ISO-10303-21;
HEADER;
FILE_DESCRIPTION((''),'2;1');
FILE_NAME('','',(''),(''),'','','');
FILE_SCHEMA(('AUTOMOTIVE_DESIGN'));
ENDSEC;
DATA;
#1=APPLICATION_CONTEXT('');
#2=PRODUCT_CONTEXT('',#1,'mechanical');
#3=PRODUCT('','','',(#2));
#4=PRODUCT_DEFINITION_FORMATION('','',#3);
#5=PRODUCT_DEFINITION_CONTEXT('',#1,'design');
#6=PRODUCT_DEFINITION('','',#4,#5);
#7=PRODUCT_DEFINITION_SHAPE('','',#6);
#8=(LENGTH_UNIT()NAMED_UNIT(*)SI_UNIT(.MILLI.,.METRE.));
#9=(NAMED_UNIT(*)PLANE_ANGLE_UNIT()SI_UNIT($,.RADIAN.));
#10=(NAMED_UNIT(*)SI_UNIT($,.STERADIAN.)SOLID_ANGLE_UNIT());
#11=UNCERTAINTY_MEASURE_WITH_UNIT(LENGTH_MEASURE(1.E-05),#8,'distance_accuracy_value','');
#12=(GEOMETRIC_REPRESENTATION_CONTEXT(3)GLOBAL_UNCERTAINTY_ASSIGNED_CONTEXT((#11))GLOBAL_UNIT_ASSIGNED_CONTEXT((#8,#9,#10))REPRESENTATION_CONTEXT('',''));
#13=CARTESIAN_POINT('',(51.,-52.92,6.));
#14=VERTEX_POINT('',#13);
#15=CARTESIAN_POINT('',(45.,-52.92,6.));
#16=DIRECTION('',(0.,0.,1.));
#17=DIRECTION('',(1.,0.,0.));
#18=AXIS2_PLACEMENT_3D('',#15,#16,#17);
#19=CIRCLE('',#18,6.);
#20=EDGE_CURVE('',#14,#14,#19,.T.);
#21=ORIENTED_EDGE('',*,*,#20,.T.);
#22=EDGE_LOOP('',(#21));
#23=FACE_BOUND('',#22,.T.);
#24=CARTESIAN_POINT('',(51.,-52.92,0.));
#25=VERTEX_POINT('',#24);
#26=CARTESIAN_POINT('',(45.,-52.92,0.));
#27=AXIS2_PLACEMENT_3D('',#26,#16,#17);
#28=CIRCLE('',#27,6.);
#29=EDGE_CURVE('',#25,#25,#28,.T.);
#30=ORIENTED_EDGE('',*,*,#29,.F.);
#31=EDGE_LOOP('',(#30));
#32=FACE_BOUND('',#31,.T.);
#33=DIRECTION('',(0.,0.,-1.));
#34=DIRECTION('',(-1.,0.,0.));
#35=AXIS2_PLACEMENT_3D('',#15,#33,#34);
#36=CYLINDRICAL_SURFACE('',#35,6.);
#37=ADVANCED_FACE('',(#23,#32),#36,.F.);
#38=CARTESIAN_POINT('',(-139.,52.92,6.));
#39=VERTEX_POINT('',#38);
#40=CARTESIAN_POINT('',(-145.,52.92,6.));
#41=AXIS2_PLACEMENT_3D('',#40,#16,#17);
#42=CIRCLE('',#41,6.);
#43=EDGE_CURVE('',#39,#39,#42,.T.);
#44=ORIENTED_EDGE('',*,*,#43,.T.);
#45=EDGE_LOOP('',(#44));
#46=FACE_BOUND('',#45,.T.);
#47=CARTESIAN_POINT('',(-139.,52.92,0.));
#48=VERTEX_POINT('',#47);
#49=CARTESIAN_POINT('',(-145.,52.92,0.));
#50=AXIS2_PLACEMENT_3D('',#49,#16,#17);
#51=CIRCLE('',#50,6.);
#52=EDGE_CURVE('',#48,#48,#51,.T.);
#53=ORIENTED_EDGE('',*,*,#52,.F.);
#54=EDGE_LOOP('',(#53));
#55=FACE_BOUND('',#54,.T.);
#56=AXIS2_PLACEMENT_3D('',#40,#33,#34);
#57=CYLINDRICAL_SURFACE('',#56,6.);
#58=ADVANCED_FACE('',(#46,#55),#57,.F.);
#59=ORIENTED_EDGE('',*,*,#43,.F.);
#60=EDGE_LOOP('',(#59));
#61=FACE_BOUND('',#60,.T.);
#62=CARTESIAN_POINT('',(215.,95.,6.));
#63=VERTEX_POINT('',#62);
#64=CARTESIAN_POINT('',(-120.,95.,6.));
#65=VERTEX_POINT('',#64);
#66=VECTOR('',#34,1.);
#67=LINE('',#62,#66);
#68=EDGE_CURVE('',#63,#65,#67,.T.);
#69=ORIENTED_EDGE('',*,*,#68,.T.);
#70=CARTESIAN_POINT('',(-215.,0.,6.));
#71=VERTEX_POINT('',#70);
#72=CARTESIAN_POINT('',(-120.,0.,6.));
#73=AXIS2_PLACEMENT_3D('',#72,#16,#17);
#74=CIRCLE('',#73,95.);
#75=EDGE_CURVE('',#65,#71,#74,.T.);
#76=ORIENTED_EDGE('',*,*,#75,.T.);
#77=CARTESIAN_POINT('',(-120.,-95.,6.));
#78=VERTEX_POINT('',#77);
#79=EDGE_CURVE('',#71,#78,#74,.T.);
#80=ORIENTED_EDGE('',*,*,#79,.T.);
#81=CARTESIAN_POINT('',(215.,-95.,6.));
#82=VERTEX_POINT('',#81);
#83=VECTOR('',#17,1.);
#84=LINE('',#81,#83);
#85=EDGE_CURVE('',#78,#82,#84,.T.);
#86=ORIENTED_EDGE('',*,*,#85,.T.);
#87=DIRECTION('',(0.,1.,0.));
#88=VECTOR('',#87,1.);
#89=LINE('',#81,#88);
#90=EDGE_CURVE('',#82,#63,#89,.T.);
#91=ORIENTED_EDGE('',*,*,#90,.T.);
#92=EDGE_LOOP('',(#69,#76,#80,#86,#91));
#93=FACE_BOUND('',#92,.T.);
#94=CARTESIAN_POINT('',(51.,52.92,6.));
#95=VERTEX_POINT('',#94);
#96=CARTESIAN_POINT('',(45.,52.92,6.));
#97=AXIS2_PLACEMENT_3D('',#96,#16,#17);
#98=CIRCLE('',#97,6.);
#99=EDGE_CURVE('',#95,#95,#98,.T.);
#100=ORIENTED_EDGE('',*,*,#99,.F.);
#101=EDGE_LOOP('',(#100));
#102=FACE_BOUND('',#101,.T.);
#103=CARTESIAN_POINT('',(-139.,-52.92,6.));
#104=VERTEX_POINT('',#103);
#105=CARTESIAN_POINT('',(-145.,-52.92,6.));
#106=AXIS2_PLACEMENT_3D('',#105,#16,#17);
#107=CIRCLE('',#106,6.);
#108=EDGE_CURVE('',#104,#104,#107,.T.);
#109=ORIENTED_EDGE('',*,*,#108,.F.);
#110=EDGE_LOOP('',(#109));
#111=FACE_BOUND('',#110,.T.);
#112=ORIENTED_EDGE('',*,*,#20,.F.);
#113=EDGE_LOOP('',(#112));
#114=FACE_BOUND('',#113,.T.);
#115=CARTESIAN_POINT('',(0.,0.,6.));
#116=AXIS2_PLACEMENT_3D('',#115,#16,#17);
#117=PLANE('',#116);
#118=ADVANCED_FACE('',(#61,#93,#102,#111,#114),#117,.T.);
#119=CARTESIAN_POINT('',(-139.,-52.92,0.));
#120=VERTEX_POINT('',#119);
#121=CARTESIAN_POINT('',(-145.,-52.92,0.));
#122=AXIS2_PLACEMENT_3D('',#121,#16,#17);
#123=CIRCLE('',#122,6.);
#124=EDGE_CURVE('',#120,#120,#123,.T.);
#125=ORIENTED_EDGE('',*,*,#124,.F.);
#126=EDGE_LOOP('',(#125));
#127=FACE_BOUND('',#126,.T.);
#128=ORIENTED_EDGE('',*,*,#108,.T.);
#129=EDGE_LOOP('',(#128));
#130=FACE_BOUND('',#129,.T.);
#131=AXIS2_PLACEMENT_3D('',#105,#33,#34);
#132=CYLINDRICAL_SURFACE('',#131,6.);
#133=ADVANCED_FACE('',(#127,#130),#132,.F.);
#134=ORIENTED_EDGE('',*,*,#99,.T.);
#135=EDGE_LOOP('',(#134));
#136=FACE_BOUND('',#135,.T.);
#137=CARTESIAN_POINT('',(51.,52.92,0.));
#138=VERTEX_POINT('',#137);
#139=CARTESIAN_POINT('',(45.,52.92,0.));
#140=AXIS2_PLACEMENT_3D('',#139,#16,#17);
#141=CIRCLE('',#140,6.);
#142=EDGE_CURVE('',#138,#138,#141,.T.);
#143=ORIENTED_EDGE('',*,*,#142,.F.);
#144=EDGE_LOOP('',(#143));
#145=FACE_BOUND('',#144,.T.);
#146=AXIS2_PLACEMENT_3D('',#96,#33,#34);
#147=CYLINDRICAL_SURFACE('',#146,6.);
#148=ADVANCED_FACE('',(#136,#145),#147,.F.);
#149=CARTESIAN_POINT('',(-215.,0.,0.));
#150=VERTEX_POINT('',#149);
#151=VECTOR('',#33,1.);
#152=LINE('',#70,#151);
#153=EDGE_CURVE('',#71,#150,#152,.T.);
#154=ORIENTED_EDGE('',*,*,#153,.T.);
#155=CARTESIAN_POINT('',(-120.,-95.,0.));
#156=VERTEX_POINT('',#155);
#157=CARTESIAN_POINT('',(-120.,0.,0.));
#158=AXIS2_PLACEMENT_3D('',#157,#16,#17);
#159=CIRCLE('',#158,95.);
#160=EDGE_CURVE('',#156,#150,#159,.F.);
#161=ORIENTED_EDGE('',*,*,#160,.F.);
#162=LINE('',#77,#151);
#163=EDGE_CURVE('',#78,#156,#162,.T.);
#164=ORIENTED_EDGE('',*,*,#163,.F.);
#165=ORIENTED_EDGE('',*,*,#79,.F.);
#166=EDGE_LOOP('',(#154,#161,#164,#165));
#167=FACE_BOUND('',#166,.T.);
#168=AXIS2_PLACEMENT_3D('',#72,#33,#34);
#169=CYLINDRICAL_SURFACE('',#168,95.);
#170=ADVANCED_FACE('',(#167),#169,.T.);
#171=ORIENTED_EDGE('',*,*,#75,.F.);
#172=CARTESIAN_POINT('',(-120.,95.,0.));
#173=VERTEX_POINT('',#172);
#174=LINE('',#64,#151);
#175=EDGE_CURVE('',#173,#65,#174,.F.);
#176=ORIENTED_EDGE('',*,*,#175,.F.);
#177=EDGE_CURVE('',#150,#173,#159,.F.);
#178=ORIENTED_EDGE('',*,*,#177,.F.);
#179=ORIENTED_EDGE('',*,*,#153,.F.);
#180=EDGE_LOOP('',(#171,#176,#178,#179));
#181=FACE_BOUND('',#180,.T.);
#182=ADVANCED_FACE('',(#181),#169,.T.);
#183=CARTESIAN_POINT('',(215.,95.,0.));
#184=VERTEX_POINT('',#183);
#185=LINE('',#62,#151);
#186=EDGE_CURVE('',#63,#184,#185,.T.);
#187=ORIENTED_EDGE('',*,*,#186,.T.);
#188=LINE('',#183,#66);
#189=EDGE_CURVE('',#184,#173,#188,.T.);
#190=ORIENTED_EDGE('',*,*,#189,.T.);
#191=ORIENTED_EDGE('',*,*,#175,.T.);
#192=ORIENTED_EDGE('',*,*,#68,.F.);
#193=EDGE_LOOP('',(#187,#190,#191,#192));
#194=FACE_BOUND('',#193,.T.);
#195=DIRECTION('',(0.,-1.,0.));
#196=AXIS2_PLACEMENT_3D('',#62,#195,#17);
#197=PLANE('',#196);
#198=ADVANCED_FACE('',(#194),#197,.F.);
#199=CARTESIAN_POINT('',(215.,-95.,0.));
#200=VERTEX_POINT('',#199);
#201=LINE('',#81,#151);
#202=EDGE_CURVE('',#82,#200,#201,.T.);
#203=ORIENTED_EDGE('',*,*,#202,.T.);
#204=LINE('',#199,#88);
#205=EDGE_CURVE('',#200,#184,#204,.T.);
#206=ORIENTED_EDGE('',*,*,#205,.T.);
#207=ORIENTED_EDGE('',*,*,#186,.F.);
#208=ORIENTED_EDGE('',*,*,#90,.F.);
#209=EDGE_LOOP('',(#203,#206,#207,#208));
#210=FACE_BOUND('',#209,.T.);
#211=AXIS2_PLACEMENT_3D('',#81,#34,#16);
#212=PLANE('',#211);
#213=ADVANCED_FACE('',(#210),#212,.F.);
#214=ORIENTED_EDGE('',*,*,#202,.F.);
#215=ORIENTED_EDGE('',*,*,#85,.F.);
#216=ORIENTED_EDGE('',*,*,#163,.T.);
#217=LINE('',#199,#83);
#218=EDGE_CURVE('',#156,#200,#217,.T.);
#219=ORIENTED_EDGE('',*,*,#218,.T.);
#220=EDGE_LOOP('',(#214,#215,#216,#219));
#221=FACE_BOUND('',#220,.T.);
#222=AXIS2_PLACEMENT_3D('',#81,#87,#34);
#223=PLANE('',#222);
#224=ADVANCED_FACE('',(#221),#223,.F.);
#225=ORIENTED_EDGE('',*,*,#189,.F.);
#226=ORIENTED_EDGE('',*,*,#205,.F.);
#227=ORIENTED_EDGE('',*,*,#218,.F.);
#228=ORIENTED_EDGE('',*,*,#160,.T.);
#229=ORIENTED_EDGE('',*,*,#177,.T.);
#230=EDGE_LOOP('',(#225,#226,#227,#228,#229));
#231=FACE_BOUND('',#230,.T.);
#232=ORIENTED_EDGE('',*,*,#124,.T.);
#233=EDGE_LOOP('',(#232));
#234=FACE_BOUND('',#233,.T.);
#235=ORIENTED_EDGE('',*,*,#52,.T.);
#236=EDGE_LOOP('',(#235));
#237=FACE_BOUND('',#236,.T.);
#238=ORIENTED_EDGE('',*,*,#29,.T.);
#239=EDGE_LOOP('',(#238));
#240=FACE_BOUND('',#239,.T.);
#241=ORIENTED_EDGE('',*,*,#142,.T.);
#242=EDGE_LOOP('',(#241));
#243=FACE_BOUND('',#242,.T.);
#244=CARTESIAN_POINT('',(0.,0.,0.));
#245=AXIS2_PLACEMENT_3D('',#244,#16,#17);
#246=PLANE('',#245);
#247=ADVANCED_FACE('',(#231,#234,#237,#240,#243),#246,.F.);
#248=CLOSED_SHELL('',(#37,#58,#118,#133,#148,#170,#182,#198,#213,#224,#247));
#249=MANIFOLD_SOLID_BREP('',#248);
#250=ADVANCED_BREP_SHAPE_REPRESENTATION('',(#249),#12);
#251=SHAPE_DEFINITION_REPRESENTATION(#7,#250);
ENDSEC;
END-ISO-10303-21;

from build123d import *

# Parameters (mm, degrees)
SKETCH1_W           = 430
SKETCH1_H           = 190
SKETCH1_R           = 6
BOSS_EXTRUDE1_DEPTH = 6
FILLET1_R           = 95


with BuildPart() as part:
    # Sketch1 → Boss-Extrude1 (new body)
    with BuildSketch(Plane.XY):
        Rectangle(SKETCH1_W, SKETCH1_H)
        with Locations((-145, 52.92)):
            Circle(SKETCH1_R, mode=Mode.SUBTRACT)
        with Locations((45, 52.92)):
            Circle(SKETCH1_R, mode=Mode.SUBTRACT)
        with Locations((45, -52.92)):
            Circle(SKETCH1_R, mode=Mode.SUBTRACT)
        with Locations((-145, -52.92)):
            Circle(SKETCH1_R, mode=Mode.SUBTRACT)
    extrude(amount=BOSS_EXTRUDE1_DEPTH)

    # Fillet1
    fillet1_edges = [part.edges().sort_by_distance(p)[0] for p in [
        (-215, -95, 3),
        (-215, 95, 3),
    ]]
    fillet(fillet1_edges, radius=FILLET1_R - 0.0001)  # a hair under: the kernel refuses the full size


solid = part.part
